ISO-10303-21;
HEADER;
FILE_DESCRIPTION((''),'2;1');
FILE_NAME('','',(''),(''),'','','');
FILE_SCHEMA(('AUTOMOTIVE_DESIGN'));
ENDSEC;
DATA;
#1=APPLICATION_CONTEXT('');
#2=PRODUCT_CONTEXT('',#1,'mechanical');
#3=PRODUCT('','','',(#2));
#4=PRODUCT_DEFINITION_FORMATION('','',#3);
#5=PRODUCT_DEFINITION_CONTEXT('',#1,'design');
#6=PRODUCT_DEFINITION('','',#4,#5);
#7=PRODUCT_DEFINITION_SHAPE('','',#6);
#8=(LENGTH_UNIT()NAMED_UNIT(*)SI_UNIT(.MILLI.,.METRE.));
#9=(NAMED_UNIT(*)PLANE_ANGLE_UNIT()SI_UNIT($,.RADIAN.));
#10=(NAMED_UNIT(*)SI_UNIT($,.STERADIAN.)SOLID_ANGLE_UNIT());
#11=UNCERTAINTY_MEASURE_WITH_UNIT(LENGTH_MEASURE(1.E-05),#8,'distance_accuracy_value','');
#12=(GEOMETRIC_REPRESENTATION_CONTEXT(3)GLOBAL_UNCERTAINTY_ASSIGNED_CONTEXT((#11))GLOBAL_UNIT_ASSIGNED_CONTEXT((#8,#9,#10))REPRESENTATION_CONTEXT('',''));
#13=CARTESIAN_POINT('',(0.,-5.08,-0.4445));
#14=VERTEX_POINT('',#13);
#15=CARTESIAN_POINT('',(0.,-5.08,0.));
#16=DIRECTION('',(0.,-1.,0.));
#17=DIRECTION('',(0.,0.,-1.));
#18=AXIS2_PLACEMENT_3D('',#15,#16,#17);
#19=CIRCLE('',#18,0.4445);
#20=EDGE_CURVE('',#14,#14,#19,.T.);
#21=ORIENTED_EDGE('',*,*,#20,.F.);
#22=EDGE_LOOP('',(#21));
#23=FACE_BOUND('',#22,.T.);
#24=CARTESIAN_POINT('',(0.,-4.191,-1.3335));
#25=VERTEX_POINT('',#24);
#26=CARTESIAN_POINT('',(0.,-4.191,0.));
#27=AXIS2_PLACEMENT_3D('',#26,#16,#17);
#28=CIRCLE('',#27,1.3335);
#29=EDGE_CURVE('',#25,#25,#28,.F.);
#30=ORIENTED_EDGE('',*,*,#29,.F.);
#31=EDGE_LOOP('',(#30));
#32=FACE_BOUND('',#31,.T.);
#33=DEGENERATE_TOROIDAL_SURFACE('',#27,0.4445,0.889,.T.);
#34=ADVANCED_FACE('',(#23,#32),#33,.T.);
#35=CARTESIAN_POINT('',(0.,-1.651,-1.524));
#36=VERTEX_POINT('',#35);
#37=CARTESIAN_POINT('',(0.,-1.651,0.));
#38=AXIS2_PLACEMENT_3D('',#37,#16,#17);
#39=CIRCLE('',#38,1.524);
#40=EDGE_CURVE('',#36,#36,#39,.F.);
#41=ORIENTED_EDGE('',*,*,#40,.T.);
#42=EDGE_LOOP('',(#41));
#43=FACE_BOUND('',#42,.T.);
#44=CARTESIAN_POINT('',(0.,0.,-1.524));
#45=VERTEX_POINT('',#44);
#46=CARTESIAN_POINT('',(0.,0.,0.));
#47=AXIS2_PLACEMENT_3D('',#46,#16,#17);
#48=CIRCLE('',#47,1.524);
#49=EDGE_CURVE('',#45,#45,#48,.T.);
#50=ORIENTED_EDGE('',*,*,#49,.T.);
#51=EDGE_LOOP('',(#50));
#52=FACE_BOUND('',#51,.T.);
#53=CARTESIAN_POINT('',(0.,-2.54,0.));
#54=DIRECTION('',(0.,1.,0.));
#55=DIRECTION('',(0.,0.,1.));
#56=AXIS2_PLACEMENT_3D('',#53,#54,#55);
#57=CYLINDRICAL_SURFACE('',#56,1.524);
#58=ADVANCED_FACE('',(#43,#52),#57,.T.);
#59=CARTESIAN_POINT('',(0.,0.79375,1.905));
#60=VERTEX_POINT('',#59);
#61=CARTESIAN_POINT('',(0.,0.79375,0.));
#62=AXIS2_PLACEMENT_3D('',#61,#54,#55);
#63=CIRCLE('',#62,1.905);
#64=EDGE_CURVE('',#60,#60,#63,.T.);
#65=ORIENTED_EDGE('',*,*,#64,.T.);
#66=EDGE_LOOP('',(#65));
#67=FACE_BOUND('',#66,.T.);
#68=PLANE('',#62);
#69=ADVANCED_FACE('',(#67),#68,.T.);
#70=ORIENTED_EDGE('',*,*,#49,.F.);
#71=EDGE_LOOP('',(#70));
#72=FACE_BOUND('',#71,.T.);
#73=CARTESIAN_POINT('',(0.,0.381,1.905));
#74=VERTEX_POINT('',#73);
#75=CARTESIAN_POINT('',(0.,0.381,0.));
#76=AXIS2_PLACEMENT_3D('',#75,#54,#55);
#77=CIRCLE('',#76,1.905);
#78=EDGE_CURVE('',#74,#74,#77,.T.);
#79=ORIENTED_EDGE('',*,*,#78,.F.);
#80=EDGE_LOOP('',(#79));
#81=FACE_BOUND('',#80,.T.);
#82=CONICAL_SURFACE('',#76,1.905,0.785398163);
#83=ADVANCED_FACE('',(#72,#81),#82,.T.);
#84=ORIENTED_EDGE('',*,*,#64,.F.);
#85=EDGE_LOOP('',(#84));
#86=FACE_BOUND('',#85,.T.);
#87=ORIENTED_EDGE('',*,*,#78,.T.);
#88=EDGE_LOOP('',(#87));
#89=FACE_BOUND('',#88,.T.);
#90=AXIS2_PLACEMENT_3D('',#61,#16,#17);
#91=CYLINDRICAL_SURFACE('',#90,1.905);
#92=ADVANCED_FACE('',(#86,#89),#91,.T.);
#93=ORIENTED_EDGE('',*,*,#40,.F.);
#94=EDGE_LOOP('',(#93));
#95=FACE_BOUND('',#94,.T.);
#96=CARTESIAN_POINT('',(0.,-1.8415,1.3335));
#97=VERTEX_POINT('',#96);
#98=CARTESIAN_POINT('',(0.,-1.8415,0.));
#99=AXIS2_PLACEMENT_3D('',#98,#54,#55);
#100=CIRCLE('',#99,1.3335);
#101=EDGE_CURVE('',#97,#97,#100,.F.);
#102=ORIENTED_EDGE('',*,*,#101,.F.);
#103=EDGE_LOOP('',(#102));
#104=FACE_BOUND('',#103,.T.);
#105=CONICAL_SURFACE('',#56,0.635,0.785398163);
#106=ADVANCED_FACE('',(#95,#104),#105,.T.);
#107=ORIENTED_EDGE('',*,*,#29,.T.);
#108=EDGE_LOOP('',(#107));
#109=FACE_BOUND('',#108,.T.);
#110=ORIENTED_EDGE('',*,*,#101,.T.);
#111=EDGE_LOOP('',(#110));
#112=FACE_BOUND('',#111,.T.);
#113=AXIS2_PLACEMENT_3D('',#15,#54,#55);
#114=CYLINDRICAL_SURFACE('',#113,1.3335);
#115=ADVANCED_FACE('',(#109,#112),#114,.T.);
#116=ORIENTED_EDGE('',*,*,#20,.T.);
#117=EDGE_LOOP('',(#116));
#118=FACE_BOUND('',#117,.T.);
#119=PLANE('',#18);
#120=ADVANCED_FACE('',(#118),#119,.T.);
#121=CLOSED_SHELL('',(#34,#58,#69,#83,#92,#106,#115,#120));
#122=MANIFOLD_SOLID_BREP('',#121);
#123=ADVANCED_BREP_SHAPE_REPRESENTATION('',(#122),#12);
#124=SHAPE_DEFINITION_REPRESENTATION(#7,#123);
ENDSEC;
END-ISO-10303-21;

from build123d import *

# Parameters (mm, degrees)
SKETCH1_R           = 1.905
BOSS_EXTRUDE1_DEPTH = 0.79375
SKETCH2_R           = 1.524
BOSS_EXTRUDE2_DEPTH = 2.54
CHAMFER1_SIZE       = 0.381
SKETCH4_R           = 1.3335
BOSS_EXTRUDE3_DEPTH = 2.54
FILLET3_R           = 0.889
CHAMFER2_SIZE       = 0.889


# Some blends are built 0.0001 mm under size
with BuildPart() as part:
    # Sketch1 → Boss-Extrude1 (new body)
    with BuildSketch(Plane(origin=(0, 0, 0), x_dir=(1, 0, 0), z_dir=(0, 1, 0))):
        with Locations(Location((0, 0, 0), (0, 0, 270))):
            Circle(SKETCH1_R)
    extrude(amount=BOSS_EXTRUDE1_DEPTH)

    # Sketch2 → Boss-Extrude2 (add)
    with BuildSketch(Plane.XZ):
        with Locations(Location((0, 0, 0), (0, 0, 270))):
            Circle(SKETCH2_R)
    extrude(amount=BOSS_EXTRUDE2_DEPTH)

    # Chamfer1
    chamfer1_edges = [part.edges().sort_by_distance(p)[0] for p in [
        (0, 0, -1.905),
    ]]
    chamfer(chamfer1_edges, length=CHAMFER1_SIZE - 0.0001)  # a hair under: the kernel refuses the full size

    # Sketch4 → Boss-Extrude3 (add)
    with BuildSketch(Plane.XZ.offset(2.54)):
        with Locations(Location((0, 0, 0), (0, 0, 270))):
            Circle(SKETCH4_R)
    extrude(amount=BOSS_EXTRUDE3_DEPTH)

    # Fillet3
    fillet3_edges = [part.edges().sort_by_distance(p)[0] for p in [
        (0, -5.08, 1.3335),
    ]]
    fillet(fillet3_edges, radius=FILLET3_R)

    # Chamfer2
    # the kernel refuses this chamfer: 0.889 mm, written as the material it takes off along each edge
    with BuildSketch(Plane(origin=(0, -2.54, 0), x_dir=(0, 0, -1), z_dir=(-1, 0, 0))) as chamfer2_piece_1_section:
        Polygon((1.524 - CHAMFER2_SIZE, 0), (1.524, -CHAMFER2_SIZE), (1.524, 0), align=None)
    chamfer2_piece_1 = revolve(axis=Axis((0, -2.54, 0), (0, -1, 0)), mode=Mode.PRIVATE)
    chamfer2_piece_1 = chamfer2_piece_1 - Plane(origin=(0, -1.741914517, 0), x_dir=(0, 0, -1), z_dir=(0, 1, 0)) * Cylinder(1.3335, 7, mode=Mode.PRIVATE)
    add(chamfer2_piece_1, mode=Mode.SUBTRACT)


solid = part.part
